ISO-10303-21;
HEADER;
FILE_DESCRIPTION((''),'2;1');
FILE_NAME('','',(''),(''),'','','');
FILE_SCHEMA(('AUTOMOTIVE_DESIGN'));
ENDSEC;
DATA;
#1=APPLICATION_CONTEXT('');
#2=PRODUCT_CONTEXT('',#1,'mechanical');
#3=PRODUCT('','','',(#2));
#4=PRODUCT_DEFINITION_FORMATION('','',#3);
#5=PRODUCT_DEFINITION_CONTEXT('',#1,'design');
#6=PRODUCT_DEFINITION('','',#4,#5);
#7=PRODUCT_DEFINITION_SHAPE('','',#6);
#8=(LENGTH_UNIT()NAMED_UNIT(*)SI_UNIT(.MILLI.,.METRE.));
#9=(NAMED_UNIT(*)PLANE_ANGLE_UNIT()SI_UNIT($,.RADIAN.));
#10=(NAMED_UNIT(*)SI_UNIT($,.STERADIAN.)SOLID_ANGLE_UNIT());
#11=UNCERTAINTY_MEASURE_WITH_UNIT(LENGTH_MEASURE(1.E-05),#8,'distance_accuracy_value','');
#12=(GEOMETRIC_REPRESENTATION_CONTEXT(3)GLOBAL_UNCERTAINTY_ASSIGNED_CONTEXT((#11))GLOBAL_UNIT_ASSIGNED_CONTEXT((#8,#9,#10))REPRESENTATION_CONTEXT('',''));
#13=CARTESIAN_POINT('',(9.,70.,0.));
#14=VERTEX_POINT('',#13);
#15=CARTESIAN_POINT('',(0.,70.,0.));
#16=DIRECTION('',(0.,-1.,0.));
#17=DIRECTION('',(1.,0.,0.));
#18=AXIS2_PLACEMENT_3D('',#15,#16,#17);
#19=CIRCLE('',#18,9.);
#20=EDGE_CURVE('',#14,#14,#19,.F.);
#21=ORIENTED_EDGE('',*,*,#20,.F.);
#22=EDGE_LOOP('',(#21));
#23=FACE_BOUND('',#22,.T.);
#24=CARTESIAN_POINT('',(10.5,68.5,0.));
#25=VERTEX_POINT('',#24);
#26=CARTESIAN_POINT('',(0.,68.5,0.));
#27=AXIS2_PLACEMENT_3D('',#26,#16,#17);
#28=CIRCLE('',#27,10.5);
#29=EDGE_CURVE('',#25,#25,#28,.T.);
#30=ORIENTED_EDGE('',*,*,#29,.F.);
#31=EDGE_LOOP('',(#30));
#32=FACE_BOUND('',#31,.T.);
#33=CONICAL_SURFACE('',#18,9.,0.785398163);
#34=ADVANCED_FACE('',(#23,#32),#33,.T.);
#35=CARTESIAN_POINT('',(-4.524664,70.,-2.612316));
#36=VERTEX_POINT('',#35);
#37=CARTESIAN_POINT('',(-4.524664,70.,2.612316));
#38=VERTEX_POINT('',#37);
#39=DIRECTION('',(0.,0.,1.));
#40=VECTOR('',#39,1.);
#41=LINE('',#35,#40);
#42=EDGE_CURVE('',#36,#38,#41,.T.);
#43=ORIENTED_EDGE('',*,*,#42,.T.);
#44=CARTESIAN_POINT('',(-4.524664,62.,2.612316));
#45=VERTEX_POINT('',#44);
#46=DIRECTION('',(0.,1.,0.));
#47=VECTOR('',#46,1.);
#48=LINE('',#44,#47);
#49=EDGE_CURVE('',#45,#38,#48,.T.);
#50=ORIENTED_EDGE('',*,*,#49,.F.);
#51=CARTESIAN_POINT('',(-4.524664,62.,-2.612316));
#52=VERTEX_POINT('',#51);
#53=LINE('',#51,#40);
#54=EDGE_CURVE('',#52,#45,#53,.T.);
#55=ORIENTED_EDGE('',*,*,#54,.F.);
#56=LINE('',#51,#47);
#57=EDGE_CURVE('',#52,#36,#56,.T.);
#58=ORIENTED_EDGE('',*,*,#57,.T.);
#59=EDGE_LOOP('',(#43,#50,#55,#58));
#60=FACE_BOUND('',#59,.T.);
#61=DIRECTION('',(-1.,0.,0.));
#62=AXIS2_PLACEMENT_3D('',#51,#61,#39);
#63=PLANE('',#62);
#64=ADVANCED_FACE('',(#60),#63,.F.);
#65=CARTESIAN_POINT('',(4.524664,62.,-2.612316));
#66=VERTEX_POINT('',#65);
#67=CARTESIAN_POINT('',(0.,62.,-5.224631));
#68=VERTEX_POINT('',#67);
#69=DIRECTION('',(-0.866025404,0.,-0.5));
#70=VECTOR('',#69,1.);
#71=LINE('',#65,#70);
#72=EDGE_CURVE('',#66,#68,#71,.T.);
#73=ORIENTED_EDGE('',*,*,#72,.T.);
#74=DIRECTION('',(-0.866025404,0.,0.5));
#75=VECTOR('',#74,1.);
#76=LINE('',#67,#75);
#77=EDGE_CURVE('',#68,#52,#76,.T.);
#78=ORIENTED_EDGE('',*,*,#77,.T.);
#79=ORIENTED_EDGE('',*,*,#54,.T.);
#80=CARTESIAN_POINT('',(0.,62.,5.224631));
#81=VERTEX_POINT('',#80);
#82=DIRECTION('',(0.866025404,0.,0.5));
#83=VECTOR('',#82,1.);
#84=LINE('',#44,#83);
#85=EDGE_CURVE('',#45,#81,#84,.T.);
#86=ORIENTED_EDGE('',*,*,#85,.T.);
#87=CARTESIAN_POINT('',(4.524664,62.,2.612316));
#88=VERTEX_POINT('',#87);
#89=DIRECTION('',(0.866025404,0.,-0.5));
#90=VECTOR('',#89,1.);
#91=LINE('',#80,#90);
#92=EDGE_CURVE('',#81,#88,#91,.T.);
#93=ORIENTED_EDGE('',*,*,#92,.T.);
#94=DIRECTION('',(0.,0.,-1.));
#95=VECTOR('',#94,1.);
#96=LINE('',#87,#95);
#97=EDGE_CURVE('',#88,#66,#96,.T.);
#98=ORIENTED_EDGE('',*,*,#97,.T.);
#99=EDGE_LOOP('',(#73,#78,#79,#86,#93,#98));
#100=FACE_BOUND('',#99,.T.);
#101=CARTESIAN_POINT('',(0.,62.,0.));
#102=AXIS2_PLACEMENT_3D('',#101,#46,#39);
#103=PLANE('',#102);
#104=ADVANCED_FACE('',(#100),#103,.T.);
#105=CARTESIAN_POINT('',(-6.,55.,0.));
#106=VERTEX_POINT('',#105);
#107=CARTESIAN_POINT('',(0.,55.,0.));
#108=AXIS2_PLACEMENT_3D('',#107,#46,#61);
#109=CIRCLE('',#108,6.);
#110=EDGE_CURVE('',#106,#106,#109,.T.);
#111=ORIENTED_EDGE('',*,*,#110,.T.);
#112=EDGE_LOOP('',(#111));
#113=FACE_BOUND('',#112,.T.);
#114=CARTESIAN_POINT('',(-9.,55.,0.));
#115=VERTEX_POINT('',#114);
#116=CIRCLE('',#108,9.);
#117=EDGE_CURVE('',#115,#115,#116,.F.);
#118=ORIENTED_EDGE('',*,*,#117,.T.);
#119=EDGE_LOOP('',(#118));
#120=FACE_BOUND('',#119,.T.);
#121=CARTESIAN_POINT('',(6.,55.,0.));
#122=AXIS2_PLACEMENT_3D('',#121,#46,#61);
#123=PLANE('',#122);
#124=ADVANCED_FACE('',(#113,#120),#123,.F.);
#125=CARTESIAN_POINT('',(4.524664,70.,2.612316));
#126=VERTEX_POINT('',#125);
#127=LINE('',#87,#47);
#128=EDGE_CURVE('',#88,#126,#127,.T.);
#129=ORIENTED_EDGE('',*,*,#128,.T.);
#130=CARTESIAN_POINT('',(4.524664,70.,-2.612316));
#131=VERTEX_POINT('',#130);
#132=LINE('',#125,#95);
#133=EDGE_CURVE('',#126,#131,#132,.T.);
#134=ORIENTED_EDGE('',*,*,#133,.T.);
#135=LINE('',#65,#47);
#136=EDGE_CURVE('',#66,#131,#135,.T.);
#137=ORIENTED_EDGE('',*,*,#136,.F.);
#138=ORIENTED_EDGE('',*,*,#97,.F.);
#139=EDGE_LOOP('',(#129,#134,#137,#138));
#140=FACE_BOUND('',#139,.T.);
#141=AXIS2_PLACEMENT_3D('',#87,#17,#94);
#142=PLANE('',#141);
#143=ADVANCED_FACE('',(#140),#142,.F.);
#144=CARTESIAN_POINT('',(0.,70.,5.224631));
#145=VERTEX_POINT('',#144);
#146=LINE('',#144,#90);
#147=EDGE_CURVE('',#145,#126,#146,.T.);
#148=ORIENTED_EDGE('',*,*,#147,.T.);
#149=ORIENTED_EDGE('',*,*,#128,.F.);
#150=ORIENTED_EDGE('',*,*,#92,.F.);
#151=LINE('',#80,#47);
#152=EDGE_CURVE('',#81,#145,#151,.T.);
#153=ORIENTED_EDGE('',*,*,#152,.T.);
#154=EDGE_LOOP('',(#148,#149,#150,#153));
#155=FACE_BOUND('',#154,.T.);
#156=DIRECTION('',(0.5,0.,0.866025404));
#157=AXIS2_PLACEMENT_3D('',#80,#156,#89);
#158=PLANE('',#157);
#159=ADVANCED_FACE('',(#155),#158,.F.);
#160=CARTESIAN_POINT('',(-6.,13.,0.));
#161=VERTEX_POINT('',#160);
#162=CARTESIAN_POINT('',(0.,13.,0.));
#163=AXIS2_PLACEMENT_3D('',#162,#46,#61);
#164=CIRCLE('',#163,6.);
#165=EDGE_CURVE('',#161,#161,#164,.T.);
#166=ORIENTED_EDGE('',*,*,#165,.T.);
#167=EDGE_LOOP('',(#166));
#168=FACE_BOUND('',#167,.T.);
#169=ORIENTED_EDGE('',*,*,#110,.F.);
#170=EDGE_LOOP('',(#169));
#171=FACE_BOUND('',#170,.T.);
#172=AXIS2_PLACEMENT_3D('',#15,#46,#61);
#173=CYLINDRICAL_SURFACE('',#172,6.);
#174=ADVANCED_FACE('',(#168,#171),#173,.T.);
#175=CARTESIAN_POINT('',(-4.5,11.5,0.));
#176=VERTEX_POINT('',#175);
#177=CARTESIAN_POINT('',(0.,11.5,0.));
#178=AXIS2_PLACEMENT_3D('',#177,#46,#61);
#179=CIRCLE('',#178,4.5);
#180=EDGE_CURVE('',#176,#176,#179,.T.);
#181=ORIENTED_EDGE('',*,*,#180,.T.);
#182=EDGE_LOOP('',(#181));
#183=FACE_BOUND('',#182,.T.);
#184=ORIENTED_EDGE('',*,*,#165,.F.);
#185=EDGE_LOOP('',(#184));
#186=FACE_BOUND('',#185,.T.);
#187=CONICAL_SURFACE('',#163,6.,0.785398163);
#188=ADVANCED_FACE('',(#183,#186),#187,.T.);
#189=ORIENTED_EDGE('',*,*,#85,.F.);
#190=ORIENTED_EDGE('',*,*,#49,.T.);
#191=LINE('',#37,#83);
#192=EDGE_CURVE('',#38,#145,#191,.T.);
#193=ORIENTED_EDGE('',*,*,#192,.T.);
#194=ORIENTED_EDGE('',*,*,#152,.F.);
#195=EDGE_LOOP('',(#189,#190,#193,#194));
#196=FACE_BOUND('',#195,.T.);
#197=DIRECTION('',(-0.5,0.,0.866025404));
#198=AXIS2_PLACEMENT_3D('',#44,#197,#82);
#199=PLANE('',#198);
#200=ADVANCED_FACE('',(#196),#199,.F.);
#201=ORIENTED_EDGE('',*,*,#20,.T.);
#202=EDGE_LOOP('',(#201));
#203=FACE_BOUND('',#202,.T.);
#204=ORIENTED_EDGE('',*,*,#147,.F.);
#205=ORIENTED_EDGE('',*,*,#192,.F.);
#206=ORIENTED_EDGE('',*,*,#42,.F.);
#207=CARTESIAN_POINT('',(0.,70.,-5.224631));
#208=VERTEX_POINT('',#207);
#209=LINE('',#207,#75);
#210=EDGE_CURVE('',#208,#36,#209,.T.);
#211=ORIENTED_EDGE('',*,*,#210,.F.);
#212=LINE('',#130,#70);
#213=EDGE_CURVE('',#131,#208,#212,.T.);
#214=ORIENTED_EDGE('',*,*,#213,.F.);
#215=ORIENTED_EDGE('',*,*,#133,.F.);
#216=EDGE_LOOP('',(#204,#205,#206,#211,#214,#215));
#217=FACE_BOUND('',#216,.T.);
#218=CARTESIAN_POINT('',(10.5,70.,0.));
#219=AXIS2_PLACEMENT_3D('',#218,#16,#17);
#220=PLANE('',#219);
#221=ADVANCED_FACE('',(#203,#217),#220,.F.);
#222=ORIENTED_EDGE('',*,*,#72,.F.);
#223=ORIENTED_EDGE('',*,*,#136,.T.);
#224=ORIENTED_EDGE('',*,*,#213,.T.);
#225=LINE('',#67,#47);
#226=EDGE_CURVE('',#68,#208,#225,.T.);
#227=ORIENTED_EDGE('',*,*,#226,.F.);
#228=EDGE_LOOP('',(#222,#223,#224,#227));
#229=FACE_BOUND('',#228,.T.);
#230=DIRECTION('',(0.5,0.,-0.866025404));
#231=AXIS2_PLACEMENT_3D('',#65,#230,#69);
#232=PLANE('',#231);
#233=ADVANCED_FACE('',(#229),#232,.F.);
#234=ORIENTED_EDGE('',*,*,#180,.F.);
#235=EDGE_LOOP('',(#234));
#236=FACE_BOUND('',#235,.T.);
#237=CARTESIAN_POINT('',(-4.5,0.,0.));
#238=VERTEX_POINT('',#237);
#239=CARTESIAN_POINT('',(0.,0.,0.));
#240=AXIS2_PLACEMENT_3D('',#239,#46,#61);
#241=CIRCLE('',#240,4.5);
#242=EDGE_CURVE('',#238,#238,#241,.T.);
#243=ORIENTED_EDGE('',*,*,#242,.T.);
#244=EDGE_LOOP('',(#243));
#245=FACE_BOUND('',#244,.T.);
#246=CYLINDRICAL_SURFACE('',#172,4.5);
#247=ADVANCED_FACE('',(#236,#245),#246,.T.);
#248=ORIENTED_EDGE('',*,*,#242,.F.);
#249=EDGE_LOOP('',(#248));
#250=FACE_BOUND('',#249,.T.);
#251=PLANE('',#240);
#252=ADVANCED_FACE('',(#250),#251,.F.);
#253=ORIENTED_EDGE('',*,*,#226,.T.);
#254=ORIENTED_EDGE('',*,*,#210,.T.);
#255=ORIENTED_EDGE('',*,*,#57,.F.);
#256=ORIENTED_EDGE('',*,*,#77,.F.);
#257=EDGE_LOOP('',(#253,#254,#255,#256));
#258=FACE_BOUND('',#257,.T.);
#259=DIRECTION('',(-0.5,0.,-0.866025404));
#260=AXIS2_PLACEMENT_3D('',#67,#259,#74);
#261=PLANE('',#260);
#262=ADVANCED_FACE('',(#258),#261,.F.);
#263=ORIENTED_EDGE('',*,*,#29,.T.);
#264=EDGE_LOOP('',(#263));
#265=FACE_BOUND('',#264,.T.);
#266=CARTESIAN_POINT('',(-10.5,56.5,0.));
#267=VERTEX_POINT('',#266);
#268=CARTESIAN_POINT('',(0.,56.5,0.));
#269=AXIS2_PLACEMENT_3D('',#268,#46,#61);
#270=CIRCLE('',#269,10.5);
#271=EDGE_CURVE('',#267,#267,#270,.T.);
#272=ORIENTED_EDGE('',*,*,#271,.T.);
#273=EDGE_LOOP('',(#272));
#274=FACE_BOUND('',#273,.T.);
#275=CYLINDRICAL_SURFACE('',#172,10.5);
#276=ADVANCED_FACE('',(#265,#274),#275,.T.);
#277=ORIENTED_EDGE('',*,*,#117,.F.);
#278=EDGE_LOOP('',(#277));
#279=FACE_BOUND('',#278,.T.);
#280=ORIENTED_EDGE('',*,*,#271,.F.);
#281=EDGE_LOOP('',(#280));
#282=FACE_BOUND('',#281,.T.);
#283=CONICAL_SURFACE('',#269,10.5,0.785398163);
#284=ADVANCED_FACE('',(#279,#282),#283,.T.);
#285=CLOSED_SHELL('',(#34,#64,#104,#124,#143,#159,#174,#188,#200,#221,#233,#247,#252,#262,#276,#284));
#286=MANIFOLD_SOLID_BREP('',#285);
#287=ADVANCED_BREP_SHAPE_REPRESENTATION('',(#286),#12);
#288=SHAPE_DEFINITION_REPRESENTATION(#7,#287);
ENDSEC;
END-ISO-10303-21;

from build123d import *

# Parameters (mm, degrees)
CHAMFER1_SIZE      = 1.5
CUT_EXTRUDE1_DEPTH = 8


with BuildPart() as part:
    # Sketch1 → Revolve1 (revolve)
    with BuildSketch(Plane.XY, mode=Mode.PRIVATE) as revolve1_sk:
        Polygon((0, 0), (4.5, 0), (4.5, 11.5), (6, 11.5), (6, 55), (10.5, 55), (10.5, 70), (0, 70), align=None)
    revolve(revolve1_sk.sketch.rotate(Axis((0, 70, 0), (0, -1, 0)), 180), axis=Axis((0, 70, 0), (0, -1, 0)))

    # Chamfer1
    chamfer1_edges = [part.edges().sort_by_distance(p)[0] for p in [
        (10.5, 70, 0),
        (10.5, 55, 0),
        (6, 11.5, 0),
    ]]
    chamfer(chamfer1_edges, length=CHAMFER1_SIZE - 0.0001)  # a hair under: the kernel refuses the full size

    # Sketch2 → Cut-Extrude1 (cut)
    with BuildSketch(Plane(origin=(0, 70, 0), x_dir=(1, 0, 0), z_dir=(0, 1, 0))):
        Polygon((0, 5.22463141), (-4.524663526, 2.612315705), (-4.524663526, -2.612315705), (0, -5.22463141), (4.524663526, -2.612315705), (4.524663526, 2.612315705), align=None)
    extrude(amount=-CUT_EXTRUDE1_DEPTH, mode=Mode.SUBTRACT)


solid = part.part
